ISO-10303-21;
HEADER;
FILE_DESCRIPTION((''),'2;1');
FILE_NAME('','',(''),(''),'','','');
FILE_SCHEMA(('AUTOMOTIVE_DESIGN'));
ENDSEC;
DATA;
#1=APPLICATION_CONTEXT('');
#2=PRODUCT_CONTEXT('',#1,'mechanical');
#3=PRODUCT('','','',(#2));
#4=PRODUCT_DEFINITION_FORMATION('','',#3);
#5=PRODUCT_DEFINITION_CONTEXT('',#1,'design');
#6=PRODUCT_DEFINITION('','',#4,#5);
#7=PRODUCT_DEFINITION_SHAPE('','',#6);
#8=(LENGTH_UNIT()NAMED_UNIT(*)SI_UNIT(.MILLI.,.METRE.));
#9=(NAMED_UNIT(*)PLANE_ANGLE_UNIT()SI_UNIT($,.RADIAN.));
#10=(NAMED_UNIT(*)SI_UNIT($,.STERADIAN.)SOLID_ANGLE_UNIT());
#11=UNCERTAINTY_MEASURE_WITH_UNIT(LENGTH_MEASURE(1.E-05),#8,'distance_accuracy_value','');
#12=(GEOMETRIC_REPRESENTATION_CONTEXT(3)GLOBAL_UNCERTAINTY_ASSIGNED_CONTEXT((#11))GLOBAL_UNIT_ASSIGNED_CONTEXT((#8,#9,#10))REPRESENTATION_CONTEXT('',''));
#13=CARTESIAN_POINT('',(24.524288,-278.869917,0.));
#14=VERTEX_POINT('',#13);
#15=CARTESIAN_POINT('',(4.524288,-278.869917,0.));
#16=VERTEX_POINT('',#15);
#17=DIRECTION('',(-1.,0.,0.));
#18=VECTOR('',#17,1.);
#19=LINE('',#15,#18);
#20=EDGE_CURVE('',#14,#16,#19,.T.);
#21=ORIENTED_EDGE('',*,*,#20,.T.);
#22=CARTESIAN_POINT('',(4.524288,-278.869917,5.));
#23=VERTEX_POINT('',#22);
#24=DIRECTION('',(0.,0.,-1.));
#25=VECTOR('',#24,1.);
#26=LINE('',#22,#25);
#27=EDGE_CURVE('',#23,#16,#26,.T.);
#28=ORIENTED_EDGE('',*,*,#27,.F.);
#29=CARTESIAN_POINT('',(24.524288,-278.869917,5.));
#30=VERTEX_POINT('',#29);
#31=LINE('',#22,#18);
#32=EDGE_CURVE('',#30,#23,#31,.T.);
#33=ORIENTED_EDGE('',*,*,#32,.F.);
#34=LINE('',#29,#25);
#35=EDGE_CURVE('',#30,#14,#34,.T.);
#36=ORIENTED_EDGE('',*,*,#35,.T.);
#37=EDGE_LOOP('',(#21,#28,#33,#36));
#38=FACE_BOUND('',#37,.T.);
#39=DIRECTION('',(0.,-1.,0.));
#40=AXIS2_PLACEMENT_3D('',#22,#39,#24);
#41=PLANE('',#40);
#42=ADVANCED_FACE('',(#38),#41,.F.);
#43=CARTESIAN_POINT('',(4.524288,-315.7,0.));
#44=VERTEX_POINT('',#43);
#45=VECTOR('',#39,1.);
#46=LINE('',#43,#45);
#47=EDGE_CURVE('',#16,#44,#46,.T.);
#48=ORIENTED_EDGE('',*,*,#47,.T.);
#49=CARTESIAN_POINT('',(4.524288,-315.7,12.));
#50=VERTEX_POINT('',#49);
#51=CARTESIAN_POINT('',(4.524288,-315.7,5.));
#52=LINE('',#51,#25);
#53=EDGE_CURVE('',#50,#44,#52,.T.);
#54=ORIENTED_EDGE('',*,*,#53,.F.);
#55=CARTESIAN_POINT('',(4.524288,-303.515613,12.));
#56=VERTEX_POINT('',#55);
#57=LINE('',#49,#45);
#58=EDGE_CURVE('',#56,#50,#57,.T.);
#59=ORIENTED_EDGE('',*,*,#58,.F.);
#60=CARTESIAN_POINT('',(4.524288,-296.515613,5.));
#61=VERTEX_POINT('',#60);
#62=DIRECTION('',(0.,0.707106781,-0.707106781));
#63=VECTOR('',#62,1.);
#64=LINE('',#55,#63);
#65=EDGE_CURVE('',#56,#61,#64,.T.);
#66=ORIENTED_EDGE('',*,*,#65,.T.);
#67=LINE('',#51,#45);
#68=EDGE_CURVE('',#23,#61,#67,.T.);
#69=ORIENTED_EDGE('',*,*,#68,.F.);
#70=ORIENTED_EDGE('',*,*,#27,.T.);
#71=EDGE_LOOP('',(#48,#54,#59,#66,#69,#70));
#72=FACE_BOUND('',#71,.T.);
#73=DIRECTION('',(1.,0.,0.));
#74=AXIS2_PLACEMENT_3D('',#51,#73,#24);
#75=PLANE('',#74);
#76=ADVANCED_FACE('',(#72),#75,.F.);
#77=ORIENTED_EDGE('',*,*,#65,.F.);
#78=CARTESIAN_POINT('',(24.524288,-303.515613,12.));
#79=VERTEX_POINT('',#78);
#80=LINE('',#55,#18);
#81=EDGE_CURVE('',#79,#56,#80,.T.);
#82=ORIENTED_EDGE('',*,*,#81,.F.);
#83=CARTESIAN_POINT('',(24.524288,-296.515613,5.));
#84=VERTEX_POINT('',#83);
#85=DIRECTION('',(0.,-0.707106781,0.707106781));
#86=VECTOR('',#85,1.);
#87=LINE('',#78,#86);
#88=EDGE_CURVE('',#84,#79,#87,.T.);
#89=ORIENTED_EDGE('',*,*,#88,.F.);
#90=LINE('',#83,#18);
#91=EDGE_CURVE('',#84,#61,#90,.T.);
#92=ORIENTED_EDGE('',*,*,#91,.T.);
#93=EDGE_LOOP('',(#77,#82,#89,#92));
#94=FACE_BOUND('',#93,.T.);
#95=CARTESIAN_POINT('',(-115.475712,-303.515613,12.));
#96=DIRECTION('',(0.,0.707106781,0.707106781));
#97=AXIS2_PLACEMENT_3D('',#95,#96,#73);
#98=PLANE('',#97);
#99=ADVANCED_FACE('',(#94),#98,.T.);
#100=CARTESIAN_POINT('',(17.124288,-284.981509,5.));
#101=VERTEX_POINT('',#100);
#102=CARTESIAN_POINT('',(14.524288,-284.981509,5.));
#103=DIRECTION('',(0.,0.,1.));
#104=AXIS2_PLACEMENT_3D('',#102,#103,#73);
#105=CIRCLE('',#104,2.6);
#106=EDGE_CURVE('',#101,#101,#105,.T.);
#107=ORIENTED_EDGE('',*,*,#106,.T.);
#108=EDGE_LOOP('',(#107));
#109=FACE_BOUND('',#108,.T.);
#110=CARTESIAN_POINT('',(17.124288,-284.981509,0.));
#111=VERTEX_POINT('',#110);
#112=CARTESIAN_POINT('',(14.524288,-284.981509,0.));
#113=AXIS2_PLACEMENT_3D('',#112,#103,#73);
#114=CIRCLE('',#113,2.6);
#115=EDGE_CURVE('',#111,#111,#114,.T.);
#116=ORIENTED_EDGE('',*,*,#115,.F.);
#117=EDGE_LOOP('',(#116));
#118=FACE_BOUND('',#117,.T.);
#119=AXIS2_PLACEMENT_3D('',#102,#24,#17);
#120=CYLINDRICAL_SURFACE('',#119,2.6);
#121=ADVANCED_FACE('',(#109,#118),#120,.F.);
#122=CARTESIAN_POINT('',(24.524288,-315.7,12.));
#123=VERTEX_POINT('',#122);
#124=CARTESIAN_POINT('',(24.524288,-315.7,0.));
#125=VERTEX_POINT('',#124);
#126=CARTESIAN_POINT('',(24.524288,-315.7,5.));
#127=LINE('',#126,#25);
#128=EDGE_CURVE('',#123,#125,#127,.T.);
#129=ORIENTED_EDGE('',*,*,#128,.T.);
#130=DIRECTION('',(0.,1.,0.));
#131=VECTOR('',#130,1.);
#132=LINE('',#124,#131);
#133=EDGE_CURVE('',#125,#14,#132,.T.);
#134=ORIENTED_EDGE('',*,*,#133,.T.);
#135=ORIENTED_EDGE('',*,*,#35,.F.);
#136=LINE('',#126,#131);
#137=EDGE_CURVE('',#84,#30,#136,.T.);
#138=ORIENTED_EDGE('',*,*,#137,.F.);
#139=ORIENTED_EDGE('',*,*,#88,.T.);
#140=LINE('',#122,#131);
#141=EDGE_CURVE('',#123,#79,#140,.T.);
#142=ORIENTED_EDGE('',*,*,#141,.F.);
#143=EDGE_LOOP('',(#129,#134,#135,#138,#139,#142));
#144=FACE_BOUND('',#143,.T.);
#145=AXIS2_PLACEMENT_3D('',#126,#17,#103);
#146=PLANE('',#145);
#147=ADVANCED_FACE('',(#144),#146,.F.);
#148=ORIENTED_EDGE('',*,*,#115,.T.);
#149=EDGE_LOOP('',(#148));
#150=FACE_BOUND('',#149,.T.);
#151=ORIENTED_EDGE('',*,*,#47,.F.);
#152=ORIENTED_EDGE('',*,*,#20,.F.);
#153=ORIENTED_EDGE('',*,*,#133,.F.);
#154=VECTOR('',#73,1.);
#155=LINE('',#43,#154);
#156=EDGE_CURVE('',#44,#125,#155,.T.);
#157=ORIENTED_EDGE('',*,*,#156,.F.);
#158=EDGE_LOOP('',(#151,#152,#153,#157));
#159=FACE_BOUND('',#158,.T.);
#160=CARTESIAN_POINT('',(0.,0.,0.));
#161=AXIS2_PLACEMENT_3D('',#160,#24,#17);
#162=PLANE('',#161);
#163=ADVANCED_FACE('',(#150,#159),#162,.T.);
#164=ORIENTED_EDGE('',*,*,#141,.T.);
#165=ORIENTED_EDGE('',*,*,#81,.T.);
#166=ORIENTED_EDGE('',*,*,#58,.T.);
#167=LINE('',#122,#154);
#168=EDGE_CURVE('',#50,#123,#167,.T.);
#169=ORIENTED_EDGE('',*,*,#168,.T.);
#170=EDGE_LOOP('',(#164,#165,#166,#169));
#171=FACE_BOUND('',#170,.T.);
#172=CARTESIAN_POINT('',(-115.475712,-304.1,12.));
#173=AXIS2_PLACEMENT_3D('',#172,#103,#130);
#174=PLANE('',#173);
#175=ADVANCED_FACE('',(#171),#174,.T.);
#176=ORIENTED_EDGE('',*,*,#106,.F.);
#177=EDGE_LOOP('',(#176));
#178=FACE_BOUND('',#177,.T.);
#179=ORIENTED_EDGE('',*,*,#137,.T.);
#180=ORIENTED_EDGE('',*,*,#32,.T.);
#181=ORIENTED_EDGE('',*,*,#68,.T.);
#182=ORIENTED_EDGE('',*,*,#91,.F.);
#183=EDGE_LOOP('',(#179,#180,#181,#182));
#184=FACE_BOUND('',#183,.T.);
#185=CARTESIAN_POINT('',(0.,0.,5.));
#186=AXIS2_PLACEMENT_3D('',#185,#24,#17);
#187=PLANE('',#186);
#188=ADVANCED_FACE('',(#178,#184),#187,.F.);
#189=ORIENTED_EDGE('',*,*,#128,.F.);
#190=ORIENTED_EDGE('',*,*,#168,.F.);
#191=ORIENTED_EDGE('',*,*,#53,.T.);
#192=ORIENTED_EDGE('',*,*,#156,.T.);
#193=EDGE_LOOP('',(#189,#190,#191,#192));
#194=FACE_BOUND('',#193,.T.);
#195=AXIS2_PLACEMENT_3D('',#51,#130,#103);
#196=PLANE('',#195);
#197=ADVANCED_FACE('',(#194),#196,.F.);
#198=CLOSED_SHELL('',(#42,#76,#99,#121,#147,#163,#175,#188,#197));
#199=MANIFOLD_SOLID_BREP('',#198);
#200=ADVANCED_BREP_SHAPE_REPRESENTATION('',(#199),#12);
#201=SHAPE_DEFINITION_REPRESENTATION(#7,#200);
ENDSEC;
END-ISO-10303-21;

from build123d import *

# Parameters (mm, degrees)
SKICA1_W                = 20
SKICA1_H                = 36.830083089
SKICA1_R                = 2.6
P_IDAT_VYSUNUT_M1_DEPTH = 5
SKICA2_W                = 20
SKICA2_H                = 19.184386705
P_IDAT_VYSUNUT_M2_DEPTH = 7
ZKOSEN_1_SIZE           = 7


with BuildPart() as part:
    # Skica1 → Přidat vysunutím1 (new body)
    with BuildSketch(Plane.XY):
        with Locations((14.524287798, -297.284958456)):
            Rectangle(SKICA1_W, SKICA1_H)
        with Locations((14.524287798, -284.981509323)):
            Circle(SKICA1_R, mode=Mode.SUBTRACT)
    extrude(amount=P_IDAT_VYSUNUT_M1_DEPTH)

    # Skica2 → Přidat vysunutím2 (add)
    with BuildSketch(Plane.XY.offset(5)):
        with Locations((14.524287798, -306.107806648)):
            Rectangle(SKICA2_W, SKICA2_H)
    extrude(amount=P_IDAT_VYSUNUT_M2_DEPTH)

    # Zkosení1
    zkosen_1_edges = [part.edges().sort_by_distance(p)[0] for p in [
        (14.524287798, -296.515613295, 12),
    ]]
    chamfer(zkosen_1_edges, length=ZKOSEN_1_SIZE - 0.0001)  # a hair under: the kernel refuses the full size


solid = part.part
